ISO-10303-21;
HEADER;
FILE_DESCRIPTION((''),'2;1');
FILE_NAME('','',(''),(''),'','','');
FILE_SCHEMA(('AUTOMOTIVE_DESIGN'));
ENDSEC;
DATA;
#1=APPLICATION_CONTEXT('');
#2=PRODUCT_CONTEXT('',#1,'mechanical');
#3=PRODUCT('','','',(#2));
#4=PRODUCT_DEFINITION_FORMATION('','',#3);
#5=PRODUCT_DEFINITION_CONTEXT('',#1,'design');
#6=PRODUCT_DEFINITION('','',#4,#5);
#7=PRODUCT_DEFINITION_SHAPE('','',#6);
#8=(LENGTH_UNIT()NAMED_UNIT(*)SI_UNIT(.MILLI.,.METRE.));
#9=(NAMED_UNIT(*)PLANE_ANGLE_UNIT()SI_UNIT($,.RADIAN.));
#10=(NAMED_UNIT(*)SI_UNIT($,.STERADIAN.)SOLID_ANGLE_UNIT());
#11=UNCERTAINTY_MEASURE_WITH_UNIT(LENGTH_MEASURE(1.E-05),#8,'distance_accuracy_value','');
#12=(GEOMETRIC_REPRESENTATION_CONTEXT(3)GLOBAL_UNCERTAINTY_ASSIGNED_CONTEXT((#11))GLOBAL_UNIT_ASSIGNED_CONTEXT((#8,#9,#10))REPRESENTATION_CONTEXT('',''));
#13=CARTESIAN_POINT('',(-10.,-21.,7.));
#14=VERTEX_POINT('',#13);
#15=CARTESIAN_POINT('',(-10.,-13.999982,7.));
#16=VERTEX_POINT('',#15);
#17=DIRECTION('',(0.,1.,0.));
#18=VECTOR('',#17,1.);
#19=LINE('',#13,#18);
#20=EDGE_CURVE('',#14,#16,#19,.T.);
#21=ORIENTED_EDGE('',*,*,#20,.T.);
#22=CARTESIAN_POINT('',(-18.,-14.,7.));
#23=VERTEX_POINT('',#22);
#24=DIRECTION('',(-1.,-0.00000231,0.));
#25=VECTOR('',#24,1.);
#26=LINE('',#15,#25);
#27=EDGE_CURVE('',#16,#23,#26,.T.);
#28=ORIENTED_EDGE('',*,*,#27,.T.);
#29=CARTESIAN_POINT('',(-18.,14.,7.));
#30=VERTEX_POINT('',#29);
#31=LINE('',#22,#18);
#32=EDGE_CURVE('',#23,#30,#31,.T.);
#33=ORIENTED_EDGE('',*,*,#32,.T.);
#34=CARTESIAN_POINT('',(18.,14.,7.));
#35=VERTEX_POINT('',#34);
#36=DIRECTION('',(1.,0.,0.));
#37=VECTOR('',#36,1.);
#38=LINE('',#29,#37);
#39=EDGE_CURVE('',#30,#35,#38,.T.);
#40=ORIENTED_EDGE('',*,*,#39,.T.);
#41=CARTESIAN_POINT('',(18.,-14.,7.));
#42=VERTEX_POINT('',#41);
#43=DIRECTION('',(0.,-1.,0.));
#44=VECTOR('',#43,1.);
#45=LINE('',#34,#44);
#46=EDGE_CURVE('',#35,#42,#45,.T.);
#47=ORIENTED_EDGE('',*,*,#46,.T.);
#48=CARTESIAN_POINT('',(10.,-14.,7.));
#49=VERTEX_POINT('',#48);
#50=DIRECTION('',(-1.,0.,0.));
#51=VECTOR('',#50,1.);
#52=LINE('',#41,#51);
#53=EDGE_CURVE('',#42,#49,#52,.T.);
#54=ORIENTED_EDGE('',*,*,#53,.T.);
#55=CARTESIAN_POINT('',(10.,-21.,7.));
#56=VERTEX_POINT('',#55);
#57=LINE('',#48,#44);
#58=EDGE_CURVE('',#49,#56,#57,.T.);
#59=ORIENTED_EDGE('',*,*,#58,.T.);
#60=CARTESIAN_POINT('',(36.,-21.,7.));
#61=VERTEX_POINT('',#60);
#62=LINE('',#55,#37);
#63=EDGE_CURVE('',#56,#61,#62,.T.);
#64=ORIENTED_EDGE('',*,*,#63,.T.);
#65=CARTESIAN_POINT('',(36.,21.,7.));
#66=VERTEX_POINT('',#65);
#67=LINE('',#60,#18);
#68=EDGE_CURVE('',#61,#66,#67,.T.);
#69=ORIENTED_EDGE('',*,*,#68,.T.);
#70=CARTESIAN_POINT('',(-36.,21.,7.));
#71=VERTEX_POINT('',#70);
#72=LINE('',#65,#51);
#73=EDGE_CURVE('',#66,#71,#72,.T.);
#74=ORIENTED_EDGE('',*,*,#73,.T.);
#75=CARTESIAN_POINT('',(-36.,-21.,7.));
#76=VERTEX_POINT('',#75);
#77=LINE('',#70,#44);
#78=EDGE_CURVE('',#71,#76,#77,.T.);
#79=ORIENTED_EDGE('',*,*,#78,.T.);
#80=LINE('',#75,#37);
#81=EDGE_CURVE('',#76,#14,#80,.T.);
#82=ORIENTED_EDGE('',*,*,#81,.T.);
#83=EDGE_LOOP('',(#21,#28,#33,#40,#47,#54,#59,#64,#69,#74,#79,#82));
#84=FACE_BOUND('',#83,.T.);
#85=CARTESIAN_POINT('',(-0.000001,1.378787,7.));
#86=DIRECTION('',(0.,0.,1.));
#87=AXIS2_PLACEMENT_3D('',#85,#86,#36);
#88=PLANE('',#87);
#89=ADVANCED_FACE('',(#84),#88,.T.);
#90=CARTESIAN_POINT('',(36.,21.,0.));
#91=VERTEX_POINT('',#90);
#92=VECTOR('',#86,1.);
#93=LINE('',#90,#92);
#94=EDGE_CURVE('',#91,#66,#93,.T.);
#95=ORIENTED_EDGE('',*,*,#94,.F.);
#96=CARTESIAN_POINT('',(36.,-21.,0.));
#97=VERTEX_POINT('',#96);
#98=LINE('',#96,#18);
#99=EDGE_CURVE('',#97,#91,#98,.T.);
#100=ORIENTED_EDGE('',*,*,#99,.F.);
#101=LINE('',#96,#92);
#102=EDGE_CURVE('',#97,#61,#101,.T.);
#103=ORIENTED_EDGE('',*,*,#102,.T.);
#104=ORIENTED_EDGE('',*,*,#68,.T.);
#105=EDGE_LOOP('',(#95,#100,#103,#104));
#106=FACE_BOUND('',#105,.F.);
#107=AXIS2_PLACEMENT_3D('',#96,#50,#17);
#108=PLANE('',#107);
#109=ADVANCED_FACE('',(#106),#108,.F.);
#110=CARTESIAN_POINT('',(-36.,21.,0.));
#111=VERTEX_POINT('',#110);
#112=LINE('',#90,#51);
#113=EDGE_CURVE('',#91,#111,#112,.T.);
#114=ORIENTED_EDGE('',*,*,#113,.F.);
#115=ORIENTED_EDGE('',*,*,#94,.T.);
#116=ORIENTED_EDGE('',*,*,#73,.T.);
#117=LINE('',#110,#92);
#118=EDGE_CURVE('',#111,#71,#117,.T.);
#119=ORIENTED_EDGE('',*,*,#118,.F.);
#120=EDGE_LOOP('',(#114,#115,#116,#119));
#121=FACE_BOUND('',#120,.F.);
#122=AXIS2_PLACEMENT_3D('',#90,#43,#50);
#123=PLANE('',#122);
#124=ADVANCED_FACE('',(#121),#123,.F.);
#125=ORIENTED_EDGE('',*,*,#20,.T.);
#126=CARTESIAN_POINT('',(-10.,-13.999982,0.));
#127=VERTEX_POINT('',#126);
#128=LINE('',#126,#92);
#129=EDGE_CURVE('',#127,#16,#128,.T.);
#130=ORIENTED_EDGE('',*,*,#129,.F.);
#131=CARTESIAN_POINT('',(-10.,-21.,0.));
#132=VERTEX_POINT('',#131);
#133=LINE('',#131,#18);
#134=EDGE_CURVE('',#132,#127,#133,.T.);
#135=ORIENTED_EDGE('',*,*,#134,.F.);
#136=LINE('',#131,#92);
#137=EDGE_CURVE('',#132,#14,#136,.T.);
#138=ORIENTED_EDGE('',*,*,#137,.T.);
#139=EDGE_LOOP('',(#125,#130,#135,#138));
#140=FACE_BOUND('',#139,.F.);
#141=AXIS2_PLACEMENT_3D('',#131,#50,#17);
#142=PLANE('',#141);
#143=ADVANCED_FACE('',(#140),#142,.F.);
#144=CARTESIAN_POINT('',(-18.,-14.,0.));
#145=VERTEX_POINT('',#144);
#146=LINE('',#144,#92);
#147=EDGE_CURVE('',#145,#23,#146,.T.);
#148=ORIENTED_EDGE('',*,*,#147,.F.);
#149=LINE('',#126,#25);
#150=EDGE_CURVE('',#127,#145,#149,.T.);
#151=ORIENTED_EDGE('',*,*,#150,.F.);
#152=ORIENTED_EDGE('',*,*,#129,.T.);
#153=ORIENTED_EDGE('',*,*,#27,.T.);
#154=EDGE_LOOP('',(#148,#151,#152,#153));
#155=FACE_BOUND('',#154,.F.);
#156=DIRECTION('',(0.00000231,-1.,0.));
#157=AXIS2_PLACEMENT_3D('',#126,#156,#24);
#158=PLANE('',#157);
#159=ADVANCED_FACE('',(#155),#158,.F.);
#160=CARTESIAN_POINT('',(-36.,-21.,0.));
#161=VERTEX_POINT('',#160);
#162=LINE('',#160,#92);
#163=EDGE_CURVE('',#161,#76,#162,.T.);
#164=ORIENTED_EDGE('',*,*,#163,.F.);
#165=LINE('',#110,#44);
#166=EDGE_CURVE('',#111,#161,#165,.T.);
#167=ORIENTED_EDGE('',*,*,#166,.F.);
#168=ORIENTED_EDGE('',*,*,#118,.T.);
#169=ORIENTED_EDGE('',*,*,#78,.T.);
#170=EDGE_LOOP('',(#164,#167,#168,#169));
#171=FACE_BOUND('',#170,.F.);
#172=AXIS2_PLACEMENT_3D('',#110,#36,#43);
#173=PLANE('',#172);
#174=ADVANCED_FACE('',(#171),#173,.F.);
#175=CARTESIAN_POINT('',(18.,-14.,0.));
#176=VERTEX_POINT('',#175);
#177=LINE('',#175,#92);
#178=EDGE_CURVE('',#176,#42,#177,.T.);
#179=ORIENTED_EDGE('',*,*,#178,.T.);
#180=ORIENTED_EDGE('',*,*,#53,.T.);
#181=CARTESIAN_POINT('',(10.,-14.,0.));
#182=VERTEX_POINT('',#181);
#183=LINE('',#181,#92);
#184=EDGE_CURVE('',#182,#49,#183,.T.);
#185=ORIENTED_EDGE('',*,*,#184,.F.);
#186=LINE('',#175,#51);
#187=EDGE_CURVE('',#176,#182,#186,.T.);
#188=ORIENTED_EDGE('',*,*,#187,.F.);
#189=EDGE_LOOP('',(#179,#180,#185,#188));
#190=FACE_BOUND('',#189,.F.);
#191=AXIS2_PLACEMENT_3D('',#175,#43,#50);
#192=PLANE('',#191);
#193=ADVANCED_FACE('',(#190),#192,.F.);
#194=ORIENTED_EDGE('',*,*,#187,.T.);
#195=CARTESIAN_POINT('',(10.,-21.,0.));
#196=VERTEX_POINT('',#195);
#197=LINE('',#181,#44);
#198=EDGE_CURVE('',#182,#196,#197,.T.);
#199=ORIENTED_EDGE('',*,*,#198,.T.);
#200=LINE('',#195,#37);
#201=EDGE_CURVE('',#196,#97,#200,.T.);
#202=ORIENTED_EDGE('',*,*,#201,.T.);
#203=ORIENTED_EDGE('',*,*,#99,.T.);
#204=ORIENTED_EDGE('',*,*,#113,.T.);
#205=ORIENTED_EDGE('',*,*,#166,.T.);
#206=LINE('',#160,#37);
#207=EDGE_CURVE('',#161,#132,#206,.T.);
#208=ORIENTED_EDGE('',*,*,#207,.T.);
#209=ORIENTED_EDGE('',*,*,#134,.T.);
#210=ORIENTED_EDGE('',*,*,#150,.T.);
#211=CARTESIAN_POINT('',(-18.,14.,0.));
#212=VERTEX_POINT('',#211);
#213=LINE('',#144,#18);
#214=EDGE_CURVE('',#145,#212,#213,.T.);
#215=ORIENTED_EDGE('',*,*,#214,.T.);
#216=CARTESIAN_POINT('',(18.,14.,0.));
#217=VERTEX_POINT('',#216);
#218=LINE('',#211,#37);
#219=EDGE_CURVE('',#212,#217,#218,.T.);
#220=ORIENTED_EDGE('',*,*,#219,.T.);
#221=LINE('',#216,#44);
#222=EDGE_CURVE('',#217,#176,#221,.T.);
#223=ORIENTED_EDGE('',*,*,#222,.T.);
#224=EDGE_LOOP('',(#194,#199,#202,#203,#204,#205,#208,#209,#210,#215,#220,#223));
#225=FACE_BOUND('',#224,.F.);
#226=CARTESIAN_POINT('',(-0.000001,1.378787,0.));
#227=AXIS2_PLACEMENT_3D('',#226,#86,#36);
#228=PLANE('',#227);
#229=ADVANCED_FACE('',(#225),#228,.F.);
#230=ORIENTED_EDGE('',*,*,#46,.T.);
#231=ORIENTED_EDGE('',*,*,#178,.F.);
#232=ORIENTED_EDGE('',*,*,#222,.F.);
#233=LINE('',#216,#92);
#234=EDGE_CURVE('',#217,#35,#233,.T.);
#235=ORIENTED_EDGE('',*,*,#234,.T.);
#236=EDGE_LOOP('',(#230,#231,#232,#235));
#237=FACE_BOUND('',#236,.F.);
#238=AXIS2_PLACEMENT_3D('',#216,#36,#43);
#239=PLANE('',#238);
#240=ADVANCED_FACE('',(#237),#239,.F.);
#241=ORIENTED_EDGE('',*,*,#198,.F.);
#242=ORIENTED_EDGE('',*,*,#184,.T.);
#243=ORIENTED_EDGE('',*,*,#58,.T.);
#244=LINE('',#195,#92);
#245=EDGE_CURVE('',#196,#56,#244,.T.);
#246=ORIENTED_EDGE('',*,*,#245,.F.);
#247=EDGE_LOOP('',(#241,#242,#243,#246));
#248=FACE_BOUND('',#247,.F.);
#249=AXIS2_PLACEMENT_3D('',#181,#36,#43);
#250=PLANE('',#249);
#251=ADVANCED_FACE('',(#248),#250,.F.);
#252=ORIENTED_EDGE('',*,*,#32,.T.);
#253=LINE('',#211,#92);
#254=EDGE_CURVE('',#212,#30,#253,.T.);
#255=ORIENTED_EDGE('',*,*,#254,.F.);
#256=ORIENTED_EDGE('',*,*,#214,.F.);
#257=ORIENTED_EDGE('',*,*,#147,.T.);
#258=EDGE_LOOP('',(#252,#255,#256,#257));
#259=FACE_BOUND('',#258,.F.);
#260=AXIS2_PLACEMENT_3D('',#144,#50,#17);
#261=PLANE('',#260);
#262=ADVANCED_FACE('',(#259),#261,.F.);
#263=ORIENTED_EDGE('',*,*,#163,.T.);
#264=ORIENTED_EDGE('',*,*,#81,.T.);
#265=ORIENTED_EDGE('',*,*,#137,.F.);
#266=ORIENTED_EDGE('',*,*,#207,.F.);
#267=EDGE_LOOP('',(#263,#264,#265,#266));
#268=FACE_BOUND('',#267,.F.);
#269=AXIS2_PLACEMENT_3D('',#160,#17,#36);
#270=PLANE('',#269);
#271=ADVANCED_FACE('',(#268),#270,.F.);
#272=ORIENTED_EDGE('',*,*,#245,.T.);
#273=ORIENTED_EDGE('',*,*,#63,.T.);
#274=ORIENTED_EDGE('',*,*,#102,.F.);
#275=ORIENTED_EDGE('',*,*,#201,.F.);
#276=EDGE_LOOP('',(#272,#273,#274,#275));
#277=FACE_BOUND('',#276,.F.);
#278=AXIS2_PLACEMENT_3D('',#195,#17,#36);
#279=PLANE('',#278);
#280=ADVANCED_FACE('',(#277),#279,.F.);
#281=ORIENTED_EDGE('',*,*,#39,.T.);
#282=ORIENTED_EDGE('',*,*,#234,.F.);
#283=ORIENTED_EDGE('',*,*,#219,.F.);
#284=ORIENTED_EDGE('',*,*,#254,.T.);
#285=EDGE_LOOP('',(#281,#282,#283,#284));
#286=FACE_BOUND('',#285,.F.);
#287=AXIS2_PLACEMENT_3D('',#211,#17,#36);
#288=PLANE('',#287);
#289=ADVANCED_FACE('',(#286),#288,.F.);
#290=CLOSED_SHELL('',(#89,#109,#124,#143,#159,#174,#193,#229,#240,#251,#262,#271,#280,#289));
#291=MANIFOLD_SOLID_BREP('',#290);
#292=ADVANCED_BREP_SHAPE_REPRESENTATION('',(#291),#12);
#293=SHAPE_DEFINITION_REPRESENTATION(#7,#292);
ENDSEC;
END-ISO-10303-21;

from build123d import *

# Parameters (mm, degrees)
F1_DEPTH = 7


# Not quite as in the source:
# - ends of sketch curves that miss each other by under 0.0002 mm in the source are joined


with BuildPart() as f1:
    # F0 (on Top) → F1 (new body)
    with BuildSketch(Plane.XY):
        Polygon((10, -21), (36, -21), (36, 21), (-36, 21), (-36, -21), (-10, -21), (-10, -13.9999815226), (-18, -14), (-18, 14), (18, 14), (18, -14), (10, -14), align=None)
    extrude(amount=F1_DEPTH)


solid = f1.part
